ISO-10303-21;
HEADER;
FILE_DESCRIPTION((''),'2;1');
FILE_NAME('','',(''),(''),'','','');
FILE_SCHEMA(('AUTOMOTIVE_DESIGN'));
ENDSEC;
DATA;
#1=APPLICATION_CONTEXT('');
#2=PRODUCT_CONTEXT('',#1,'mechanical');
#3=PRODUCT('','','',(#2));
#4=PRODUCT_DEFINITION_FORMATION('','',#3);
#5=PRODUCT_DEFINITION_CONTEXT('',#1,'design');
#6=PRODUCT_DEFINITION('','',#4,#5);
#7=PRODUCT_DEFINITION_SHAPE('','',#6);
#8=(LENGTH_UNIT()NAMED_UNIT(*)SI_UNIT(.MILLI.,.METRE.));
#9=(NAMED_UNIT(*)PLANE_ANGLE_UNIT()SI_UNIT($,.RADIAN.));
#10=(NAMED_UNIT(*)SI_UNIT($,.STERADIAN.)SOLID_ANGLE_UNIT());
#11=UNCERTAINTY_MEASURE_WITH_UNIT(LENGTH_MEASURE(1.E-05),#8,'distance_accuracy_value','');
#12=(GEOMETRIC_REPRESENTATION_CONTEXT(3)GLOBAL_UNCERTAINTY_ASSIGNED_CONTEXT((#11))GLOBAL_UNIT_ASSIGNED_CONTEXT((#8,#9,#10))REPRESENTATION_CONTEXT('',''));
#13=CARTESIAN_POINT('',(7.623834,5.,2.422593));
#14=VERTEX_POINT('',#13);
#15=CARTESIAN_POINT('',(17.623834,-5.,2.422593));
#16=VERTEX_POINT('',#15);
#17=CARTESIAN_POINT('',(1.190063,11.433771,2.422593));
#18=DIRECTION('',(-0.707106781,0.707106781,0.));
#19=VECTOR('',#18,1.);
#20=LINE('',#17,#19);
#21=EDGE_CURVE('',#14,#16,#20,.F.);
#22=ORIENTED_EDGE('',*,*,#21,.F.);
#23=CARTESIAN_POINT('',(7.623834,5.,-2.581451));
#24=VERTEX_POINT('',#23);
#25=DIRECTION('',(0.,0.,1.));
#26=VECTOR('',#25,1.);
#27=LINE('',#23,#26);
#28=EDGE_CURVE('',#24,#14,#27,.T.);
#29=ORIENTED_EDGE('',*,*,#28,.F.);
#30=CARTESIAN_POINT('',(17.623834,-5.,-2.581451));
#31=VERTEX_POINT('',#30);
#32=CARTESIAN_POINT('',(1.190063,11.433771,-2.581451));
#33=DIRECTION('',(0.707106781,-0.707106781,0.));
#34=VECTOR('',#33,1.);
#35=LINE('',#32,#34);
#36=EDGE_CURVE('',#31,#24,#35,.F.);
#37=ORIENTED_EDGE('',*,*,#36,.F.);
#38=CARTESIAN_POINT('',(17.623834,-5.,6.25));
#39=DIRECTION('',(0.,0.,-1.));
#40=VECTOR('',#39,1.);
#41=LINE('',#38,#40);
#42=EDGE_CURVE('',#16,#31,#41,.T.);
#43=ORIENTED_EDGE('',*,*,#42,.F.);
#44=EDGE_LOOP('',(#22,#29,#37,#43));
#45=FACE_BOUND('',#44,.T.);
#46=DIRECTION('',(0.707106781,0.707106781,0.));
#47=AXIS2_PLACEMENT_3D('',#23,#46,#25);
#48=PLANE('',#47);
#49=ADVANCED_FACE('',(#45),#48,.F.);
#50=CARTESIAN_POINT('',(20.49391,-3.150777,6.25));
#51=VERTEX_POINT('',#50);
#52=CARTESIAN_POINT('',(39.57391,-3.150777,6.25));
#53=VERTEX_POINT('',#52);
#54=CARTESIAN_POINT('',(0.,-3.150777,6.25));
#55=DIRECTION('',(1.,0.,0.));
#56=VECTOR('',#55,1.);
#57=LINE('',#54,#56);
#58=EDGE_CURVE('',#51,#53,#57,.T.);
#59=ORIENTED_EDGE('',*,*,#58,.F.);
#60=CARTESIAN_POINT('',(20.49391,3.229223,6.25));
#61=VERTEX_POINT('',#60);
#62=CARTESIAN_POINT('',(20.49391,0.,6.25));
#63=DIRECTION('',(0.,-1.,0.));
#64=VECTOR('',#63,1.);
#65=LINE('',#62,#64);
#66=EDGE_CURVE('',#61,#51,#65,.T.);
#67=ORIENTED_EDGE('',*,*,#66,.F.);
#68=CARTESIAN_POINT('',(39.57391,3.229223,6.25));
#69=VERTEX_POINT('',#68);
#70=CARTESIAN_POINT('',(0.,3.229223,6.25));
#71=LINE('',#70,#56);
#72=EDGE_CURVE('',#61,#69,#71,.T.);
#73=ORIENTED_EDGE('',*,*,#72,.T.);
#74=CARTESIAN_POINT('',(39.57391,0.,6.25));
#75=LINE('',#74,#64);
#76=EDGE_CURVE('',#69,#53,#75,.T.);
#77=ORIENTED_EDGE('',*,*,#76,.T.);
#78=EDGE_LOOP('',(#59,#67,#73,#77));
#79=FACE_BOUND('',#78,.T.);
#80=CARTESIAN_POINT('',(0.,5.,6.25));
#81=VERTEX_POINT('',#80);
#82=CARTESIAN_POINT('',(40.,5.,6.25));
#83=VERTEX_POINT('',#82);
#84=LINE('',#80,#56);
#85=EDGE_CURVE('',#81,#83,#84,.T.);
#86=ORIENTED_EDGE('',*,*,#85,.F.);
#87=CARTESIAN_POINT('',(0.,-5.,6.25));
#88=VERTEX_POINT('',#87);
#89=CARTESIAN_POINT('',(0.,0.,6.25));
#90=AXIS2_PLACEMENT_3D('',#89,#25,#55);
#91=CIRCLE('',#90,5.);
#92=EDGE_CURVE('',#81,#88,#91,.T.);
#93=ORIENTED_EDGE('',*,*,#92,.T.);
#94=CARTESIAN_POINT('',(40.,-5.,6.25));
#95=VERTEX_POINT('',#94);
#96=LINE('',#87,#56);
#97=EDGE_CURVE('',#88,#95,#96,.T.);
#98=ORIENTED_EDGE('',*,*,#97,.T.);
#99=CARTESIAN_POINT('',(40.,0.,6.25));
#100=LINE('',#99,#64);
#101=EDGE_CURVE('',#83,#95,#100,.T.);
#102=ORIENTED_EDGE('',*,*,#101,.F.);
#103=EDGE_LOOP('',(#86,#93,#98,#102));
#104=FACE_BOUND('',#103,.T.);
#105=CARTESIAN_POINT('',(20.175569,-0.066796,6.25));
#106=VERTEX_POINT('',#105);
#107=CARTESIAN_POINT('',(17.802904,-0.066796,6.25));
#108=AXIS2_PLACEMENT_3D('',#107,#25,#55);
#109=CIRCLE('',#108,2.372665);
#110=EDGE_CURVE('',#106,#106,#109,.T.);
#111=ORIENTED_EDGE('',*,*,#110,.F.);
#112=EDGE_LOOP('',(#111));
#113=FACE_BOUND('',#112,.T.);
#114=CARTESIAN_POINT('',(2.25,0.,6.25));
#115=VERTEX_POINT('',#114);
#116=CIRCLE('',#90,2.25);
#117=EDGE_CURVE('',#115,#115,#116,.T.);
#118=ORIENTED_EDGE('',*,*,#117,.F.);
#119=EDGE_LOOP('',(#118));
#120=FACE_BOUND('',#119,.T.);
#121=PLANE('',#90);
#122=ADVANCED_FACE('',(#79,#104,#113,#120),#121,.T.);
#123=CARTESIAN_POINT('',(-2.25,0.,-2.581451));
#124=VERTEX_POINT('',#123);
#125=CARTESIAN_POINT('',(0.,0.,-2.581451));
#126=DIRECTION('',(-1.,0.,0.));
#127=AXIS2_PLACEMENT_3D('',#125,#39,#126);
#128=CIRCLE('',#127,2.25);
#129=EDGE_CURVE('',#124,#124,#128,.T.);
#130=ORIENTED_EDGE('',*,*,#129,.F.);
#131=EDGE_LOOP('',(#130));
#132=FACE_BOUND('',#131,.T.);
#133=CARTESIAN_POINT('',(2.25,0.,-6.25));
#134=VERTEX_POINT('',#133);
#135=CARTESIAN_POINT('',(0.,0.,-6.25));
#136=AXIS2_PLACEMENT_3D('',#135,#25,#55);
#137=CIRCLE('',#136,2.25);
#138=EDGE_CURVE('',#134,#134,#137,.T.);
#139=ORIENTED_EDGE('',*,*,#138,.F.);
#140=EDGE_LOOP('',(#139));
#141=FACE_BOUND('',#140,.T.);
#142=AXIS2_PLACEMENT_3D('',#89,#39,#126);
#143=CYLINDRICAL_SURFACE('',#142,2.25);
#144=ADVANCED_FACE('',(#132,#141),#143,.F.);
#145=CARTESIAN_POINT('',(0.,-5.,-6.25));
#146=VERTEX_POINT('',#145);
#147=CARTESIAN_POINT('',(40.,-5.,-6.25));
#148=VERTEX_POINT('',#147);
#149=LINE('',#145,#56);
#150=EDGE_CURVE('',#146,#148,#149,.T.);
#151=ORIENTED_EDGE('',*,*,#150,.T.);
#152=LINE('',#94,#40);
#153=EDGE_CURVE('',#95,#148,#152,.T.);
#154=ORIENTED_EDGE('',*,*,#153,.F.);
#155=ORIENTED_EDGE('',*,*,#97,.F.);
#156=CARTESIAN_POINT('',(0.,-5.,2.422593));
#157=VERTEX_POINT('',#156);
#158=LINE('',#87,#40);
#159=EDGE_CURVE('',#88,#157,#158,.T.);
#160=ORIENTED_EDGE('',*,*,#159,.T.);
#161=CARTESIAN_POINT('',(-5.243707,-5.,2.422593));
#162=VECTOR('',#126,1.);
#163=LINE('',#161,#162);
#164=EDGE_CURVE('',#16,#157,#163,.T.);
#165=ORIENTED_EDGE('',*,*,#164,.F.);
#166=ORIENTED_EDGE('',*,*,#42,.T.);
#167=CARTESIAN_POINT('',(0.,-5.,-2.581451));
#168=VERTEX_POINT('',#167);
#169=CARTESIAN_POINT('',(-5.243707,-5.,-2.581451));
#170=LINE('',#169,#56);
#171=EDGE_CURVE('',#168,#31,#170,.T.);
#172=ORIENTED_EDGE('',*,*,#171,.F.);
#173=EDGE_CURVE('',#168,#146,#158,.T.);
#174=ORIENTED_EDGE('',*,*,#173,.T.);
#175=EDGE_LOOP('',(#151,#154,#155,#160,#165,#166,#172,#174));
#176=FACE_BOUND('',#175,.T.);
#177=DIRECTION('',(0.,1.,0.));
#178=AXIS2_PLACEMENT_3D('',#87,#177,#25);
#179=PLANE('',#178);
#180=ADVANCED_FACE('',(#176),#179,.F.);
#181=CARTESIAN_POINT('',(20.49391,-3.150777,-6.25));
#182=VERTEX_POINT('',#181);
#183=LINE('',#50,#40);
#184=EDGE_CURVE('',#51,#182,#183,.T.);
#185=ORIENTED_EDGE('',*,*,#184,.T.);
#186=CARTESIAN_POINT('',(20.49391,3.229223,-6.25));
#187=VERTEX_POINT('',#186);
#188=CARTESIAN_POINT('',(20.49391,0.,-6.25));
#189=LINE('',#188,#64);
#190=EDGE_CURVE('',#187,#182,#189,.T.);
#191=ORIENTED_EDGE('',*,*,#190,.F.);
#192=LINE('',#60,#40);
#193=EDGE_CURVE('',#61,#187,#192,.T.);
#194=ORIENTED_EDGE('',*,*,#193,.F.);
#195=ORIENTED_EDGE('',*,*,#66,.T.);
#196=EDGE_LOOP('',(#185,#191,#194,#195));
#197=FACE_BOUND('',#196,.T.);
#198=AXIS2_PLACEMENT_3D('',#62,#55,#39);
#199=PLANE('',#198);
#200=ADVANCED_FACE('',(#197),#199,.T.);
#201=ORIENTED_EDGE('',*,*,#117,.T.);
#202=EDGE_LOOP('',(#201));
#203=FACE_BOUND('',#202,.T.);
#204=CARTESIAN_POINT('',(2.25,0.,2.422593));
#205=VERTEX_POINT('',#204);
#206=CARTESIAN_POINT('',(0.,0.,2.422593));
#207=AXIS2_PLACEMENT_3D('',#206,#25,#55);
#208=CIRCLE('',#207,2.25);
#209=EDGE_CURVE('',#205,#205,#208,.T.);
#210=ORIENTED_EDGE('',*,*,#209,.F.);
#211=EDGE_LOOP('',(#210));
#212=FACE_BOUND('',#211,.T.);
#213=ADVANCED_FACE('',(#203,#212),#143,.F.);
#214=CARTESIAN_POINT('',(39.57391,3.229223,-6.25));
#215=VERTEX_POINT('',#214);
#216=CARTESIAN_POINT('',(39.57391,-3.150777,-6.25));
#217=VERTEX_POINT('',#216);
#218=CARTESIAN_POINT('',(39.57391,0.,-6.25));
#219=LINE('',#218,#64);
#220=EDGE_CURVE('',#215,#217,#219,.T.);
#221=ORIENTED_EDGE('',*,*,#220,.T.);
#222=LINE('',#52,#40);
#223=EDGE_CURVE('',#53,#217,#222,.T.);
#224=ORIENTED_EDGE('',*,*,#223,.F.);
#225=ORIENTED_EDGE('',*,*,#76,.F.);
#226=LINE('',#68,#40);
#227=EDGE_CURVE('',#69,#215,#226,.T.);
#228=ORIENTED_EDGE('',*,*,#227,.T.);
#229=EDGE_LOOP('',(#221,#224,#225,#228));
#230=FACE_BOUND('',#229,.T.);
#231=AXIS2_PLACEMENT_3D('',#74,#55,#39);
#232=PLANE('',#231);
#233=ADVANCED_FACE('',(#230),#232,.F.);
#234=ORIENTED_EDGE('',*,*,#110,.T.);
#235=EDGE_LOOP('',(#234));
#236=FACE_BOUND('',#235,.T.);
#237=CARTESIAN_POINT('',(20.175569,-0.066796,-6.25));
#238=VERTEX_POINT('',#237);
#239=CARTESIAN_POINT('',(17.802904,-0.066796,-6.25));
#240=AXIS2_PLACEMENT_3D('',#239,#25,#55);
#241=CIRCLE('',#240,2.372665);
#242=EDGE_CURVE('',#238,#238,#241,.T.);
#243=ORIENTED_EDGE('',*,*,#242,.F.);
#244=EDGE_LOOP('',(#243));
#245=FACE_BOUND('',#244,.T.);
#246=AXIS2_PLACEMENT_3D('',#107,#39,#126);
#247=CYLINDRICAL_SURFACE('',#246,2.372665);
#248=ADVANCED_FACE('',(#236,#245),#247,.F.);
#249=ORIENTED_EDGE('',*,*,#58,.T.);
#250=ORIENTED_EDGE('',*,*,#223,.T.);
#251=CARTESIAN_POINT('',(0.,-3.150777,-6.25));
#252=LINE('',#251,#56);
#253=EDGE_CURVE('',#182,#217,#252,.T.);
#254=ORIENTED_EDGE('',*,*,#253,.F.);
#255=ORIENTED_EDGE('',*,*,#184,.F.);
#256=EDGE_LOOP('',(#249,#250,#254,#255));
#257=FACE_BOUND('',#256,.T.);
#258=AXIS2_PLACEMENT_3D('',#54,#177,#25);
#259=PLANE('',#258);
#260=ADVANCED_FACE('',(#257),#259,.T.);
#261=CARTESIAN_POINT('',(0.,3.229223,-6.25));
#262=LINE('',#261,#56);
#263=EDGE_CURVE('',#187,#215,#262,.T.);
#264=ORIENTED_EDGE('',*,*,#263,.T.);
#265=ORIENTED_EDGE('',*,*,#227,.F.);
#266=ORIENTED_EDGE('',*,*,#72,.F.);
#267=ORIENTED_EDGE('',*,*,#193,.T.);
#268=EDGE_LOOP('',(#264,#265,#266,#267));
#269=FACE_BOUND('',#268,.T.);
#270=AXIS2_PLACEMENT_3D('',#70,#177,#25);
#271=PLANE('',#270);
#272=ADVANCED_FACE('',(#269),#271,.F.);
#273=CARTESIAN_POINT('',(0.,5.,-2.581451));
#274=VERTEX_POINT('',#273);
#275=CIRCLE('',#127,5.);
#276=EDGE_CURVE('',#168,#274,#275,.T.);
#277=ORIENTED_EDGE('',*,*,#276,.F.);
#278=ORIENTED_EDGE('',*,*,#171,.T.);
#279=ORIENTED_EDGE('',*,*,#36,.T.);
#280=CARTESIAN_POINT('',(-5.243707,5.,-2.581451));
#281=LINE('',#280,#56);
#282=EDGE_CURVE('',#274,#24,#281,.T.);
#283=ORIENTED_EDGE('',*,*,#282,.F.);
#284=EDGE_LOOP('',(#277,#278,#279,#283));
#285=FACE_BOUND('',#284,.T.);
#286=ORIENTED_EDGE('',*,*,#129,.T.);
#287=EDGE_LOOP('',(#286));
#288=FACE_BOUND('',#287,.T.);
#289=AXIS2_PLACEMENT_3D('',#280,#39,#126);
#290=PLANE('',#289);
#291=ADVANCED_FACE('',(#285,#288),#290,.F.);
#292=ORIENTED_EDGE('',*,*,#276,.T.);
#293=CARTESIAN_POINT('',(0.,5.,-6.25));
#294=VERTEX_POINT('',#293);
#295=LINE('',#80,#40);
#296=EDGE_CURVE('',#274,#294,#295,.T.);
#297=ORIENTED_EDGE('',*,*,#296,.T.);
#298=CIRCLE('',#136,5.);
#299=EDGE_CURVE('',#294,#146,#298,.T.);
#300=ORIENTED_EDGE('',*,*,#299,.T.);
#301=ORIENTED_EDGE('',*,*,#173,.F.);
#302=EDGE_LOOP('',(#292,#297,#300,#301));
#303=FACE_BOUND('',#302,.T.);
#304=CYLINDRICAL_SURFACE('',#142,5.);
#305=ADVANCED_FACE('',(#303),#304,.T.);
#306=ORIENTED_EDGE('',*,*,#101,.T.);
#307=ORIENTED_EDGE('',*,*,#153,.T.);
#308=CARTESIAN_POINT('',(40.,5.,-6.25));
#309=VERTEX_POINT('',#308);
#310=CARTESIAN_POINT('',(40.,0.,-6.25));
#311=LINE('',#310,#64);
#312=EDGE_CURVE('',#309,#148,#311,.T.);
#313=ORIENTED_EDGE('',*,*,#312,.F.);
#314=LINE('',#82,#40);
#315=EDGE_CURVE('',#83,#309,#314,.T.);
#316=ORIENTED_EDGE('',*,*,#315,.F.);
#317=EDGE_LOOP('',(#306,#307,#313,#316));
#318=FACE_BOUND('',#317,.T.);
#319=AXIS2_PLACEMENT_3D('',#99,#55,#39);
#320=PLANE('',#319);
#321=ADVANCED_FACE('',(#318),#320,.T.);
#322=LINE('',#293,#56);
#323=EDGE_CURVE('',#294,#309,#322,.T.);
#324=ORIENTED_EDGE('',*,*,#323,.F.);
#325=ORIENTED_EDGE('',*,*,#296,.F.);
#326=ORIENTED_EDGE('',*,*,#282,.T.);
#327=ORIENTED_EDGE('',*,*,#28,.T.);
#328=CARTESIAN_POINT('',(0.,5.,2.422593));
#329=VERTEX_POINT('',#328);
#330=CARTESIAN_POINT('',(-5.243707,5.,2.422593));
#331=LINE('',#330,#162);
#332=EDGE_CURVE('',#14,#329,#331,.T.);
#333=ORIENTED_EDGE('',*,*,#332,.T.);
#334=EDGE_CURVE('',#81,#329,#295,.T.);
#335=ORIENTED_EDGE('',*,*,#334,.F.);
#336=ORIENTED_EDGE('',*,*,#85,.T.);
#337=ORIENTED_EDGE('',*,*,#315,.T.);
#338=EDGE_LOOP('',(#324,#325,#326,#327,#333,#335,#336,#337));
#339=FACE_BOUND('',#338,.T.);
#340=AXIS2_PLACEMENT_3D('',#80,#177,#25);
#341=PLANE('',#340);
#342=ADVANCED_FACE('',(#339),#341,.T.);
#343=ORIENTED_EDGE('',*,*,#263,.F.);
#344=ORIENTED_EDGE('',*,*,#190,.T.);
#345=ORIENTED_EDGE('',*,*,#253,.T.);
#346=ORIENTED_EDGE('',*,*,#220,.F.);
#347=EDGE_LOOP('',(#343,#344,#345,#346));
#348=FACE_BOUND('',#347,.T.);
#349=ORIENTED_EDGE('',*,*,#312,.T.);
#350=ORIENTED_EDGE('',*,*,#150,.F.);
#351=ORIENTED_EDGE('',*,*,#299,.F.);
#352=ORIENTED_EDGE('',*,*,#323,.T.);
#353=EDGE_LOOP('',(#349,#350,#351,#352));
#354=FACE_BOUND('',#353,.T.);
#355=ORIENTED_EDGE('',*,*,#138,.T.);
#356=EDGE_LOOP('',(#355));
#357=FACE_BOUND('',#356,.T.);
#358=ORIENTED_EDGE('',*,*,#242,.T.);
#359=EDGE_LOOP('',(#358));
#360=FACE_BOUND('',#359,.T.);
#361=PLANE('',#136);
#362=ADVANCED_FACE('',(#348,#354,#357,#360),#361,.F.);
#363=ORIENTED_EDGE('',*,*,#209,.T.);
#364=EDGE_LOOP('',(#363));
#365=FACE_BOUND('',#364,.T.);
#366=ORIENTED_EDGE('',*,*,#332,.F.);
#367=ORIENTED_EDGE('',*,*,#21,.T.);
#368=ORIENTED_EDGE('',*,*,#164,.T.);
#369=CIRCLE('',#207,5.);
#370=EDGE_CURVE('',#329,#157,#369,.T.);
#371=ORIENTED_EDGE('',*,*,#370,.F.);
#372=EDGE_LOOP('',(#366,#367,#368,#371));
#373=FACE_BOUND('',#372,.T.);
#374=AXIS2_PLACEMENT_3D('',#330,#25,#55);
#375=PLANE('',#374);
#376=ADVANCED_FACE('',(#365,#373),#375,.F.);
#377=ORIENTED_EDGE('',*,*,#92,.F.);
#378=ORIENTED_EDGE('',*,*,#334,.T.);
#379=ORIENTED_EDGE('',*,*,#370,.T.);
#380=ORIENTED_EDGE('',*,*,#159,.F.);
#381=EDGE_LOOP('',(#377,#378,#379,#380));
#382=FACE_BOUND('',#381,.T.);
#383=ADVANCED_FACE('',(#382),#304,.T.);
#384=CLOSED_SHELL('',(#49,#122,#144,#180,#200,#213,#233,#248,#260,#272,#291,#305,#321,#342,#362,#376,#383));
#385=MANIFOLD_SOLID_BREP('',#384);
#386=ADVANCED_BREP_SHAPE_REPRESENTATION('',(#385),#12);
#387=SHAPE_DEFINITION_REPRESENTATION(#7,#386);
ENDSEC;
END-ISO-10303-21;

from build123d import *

# Parameters (mm, degrees)
SKETCH1_R           = 2.25
SKETCH1_R_2         = 2.37266458
SKETCH1_W           = 19.08
SKETCH1_H           = 6.38
BOSS_EXTRUDE1_DEPTH = 6.25
SKETCH13_W          = 12.867541265
SKETCH13_H          = 5.004043825
CUT_EXTRUDE1_DEPTH  = 10
CHAMFER1_SIZE       = 10


with BuildPart() as part:
    # Sketch1 → Boss-Extrude1 (new, symmetric)
    with BuildSketch(Plane.XY):
        with BuildLine():
            Line((0, 5), (40, 5))
            Line((40, 5), (40, -5))
            Line((40, -5), (0, -5))
            ThreePointArc((0, -5), (-5, 0), (0, 5))
        make_face()
        Circle(SKETCH1_R, mode=Mode.SUBTRACT)
        with Locations((17.802904034, -0.066795827)):
            Circle(SKETCH1_R_2, mode=Mode.SUBTRACT)
        with Locations((30.033910385, 0.039223356)):
            Rectangle(SKETCH1_W, SKETCH1_H, mode=Mode.SUBTRACT)
    extrude(amount=BOSS_EXTRUDE1_DEPTH, both=True)

    # Sketch13 → Cut-Extrude1 (cut)
    with BuildSketch(Plane.XZ.offset(5)):
        with Locations((1.190063179, -0.07942928)):
            Rectangle(SKETCH13_W, SKETCH13_H)
    extrude(amount=-CUT_EXTRUDE1_DEPTH, mode=Mode.SUBTRACT)

    # Chamfer1
    chamfer1_edges = [part.edges().sort_by_distance(p)[0] for p in [
        (7.623833811, -5, -0.07942928),
    ]]
    chamfer(chamfer1_edges, length=CHAMFER1_SIZE - 0.0001)  # a hair under: the kernel refuses the full size


solid = part.part
